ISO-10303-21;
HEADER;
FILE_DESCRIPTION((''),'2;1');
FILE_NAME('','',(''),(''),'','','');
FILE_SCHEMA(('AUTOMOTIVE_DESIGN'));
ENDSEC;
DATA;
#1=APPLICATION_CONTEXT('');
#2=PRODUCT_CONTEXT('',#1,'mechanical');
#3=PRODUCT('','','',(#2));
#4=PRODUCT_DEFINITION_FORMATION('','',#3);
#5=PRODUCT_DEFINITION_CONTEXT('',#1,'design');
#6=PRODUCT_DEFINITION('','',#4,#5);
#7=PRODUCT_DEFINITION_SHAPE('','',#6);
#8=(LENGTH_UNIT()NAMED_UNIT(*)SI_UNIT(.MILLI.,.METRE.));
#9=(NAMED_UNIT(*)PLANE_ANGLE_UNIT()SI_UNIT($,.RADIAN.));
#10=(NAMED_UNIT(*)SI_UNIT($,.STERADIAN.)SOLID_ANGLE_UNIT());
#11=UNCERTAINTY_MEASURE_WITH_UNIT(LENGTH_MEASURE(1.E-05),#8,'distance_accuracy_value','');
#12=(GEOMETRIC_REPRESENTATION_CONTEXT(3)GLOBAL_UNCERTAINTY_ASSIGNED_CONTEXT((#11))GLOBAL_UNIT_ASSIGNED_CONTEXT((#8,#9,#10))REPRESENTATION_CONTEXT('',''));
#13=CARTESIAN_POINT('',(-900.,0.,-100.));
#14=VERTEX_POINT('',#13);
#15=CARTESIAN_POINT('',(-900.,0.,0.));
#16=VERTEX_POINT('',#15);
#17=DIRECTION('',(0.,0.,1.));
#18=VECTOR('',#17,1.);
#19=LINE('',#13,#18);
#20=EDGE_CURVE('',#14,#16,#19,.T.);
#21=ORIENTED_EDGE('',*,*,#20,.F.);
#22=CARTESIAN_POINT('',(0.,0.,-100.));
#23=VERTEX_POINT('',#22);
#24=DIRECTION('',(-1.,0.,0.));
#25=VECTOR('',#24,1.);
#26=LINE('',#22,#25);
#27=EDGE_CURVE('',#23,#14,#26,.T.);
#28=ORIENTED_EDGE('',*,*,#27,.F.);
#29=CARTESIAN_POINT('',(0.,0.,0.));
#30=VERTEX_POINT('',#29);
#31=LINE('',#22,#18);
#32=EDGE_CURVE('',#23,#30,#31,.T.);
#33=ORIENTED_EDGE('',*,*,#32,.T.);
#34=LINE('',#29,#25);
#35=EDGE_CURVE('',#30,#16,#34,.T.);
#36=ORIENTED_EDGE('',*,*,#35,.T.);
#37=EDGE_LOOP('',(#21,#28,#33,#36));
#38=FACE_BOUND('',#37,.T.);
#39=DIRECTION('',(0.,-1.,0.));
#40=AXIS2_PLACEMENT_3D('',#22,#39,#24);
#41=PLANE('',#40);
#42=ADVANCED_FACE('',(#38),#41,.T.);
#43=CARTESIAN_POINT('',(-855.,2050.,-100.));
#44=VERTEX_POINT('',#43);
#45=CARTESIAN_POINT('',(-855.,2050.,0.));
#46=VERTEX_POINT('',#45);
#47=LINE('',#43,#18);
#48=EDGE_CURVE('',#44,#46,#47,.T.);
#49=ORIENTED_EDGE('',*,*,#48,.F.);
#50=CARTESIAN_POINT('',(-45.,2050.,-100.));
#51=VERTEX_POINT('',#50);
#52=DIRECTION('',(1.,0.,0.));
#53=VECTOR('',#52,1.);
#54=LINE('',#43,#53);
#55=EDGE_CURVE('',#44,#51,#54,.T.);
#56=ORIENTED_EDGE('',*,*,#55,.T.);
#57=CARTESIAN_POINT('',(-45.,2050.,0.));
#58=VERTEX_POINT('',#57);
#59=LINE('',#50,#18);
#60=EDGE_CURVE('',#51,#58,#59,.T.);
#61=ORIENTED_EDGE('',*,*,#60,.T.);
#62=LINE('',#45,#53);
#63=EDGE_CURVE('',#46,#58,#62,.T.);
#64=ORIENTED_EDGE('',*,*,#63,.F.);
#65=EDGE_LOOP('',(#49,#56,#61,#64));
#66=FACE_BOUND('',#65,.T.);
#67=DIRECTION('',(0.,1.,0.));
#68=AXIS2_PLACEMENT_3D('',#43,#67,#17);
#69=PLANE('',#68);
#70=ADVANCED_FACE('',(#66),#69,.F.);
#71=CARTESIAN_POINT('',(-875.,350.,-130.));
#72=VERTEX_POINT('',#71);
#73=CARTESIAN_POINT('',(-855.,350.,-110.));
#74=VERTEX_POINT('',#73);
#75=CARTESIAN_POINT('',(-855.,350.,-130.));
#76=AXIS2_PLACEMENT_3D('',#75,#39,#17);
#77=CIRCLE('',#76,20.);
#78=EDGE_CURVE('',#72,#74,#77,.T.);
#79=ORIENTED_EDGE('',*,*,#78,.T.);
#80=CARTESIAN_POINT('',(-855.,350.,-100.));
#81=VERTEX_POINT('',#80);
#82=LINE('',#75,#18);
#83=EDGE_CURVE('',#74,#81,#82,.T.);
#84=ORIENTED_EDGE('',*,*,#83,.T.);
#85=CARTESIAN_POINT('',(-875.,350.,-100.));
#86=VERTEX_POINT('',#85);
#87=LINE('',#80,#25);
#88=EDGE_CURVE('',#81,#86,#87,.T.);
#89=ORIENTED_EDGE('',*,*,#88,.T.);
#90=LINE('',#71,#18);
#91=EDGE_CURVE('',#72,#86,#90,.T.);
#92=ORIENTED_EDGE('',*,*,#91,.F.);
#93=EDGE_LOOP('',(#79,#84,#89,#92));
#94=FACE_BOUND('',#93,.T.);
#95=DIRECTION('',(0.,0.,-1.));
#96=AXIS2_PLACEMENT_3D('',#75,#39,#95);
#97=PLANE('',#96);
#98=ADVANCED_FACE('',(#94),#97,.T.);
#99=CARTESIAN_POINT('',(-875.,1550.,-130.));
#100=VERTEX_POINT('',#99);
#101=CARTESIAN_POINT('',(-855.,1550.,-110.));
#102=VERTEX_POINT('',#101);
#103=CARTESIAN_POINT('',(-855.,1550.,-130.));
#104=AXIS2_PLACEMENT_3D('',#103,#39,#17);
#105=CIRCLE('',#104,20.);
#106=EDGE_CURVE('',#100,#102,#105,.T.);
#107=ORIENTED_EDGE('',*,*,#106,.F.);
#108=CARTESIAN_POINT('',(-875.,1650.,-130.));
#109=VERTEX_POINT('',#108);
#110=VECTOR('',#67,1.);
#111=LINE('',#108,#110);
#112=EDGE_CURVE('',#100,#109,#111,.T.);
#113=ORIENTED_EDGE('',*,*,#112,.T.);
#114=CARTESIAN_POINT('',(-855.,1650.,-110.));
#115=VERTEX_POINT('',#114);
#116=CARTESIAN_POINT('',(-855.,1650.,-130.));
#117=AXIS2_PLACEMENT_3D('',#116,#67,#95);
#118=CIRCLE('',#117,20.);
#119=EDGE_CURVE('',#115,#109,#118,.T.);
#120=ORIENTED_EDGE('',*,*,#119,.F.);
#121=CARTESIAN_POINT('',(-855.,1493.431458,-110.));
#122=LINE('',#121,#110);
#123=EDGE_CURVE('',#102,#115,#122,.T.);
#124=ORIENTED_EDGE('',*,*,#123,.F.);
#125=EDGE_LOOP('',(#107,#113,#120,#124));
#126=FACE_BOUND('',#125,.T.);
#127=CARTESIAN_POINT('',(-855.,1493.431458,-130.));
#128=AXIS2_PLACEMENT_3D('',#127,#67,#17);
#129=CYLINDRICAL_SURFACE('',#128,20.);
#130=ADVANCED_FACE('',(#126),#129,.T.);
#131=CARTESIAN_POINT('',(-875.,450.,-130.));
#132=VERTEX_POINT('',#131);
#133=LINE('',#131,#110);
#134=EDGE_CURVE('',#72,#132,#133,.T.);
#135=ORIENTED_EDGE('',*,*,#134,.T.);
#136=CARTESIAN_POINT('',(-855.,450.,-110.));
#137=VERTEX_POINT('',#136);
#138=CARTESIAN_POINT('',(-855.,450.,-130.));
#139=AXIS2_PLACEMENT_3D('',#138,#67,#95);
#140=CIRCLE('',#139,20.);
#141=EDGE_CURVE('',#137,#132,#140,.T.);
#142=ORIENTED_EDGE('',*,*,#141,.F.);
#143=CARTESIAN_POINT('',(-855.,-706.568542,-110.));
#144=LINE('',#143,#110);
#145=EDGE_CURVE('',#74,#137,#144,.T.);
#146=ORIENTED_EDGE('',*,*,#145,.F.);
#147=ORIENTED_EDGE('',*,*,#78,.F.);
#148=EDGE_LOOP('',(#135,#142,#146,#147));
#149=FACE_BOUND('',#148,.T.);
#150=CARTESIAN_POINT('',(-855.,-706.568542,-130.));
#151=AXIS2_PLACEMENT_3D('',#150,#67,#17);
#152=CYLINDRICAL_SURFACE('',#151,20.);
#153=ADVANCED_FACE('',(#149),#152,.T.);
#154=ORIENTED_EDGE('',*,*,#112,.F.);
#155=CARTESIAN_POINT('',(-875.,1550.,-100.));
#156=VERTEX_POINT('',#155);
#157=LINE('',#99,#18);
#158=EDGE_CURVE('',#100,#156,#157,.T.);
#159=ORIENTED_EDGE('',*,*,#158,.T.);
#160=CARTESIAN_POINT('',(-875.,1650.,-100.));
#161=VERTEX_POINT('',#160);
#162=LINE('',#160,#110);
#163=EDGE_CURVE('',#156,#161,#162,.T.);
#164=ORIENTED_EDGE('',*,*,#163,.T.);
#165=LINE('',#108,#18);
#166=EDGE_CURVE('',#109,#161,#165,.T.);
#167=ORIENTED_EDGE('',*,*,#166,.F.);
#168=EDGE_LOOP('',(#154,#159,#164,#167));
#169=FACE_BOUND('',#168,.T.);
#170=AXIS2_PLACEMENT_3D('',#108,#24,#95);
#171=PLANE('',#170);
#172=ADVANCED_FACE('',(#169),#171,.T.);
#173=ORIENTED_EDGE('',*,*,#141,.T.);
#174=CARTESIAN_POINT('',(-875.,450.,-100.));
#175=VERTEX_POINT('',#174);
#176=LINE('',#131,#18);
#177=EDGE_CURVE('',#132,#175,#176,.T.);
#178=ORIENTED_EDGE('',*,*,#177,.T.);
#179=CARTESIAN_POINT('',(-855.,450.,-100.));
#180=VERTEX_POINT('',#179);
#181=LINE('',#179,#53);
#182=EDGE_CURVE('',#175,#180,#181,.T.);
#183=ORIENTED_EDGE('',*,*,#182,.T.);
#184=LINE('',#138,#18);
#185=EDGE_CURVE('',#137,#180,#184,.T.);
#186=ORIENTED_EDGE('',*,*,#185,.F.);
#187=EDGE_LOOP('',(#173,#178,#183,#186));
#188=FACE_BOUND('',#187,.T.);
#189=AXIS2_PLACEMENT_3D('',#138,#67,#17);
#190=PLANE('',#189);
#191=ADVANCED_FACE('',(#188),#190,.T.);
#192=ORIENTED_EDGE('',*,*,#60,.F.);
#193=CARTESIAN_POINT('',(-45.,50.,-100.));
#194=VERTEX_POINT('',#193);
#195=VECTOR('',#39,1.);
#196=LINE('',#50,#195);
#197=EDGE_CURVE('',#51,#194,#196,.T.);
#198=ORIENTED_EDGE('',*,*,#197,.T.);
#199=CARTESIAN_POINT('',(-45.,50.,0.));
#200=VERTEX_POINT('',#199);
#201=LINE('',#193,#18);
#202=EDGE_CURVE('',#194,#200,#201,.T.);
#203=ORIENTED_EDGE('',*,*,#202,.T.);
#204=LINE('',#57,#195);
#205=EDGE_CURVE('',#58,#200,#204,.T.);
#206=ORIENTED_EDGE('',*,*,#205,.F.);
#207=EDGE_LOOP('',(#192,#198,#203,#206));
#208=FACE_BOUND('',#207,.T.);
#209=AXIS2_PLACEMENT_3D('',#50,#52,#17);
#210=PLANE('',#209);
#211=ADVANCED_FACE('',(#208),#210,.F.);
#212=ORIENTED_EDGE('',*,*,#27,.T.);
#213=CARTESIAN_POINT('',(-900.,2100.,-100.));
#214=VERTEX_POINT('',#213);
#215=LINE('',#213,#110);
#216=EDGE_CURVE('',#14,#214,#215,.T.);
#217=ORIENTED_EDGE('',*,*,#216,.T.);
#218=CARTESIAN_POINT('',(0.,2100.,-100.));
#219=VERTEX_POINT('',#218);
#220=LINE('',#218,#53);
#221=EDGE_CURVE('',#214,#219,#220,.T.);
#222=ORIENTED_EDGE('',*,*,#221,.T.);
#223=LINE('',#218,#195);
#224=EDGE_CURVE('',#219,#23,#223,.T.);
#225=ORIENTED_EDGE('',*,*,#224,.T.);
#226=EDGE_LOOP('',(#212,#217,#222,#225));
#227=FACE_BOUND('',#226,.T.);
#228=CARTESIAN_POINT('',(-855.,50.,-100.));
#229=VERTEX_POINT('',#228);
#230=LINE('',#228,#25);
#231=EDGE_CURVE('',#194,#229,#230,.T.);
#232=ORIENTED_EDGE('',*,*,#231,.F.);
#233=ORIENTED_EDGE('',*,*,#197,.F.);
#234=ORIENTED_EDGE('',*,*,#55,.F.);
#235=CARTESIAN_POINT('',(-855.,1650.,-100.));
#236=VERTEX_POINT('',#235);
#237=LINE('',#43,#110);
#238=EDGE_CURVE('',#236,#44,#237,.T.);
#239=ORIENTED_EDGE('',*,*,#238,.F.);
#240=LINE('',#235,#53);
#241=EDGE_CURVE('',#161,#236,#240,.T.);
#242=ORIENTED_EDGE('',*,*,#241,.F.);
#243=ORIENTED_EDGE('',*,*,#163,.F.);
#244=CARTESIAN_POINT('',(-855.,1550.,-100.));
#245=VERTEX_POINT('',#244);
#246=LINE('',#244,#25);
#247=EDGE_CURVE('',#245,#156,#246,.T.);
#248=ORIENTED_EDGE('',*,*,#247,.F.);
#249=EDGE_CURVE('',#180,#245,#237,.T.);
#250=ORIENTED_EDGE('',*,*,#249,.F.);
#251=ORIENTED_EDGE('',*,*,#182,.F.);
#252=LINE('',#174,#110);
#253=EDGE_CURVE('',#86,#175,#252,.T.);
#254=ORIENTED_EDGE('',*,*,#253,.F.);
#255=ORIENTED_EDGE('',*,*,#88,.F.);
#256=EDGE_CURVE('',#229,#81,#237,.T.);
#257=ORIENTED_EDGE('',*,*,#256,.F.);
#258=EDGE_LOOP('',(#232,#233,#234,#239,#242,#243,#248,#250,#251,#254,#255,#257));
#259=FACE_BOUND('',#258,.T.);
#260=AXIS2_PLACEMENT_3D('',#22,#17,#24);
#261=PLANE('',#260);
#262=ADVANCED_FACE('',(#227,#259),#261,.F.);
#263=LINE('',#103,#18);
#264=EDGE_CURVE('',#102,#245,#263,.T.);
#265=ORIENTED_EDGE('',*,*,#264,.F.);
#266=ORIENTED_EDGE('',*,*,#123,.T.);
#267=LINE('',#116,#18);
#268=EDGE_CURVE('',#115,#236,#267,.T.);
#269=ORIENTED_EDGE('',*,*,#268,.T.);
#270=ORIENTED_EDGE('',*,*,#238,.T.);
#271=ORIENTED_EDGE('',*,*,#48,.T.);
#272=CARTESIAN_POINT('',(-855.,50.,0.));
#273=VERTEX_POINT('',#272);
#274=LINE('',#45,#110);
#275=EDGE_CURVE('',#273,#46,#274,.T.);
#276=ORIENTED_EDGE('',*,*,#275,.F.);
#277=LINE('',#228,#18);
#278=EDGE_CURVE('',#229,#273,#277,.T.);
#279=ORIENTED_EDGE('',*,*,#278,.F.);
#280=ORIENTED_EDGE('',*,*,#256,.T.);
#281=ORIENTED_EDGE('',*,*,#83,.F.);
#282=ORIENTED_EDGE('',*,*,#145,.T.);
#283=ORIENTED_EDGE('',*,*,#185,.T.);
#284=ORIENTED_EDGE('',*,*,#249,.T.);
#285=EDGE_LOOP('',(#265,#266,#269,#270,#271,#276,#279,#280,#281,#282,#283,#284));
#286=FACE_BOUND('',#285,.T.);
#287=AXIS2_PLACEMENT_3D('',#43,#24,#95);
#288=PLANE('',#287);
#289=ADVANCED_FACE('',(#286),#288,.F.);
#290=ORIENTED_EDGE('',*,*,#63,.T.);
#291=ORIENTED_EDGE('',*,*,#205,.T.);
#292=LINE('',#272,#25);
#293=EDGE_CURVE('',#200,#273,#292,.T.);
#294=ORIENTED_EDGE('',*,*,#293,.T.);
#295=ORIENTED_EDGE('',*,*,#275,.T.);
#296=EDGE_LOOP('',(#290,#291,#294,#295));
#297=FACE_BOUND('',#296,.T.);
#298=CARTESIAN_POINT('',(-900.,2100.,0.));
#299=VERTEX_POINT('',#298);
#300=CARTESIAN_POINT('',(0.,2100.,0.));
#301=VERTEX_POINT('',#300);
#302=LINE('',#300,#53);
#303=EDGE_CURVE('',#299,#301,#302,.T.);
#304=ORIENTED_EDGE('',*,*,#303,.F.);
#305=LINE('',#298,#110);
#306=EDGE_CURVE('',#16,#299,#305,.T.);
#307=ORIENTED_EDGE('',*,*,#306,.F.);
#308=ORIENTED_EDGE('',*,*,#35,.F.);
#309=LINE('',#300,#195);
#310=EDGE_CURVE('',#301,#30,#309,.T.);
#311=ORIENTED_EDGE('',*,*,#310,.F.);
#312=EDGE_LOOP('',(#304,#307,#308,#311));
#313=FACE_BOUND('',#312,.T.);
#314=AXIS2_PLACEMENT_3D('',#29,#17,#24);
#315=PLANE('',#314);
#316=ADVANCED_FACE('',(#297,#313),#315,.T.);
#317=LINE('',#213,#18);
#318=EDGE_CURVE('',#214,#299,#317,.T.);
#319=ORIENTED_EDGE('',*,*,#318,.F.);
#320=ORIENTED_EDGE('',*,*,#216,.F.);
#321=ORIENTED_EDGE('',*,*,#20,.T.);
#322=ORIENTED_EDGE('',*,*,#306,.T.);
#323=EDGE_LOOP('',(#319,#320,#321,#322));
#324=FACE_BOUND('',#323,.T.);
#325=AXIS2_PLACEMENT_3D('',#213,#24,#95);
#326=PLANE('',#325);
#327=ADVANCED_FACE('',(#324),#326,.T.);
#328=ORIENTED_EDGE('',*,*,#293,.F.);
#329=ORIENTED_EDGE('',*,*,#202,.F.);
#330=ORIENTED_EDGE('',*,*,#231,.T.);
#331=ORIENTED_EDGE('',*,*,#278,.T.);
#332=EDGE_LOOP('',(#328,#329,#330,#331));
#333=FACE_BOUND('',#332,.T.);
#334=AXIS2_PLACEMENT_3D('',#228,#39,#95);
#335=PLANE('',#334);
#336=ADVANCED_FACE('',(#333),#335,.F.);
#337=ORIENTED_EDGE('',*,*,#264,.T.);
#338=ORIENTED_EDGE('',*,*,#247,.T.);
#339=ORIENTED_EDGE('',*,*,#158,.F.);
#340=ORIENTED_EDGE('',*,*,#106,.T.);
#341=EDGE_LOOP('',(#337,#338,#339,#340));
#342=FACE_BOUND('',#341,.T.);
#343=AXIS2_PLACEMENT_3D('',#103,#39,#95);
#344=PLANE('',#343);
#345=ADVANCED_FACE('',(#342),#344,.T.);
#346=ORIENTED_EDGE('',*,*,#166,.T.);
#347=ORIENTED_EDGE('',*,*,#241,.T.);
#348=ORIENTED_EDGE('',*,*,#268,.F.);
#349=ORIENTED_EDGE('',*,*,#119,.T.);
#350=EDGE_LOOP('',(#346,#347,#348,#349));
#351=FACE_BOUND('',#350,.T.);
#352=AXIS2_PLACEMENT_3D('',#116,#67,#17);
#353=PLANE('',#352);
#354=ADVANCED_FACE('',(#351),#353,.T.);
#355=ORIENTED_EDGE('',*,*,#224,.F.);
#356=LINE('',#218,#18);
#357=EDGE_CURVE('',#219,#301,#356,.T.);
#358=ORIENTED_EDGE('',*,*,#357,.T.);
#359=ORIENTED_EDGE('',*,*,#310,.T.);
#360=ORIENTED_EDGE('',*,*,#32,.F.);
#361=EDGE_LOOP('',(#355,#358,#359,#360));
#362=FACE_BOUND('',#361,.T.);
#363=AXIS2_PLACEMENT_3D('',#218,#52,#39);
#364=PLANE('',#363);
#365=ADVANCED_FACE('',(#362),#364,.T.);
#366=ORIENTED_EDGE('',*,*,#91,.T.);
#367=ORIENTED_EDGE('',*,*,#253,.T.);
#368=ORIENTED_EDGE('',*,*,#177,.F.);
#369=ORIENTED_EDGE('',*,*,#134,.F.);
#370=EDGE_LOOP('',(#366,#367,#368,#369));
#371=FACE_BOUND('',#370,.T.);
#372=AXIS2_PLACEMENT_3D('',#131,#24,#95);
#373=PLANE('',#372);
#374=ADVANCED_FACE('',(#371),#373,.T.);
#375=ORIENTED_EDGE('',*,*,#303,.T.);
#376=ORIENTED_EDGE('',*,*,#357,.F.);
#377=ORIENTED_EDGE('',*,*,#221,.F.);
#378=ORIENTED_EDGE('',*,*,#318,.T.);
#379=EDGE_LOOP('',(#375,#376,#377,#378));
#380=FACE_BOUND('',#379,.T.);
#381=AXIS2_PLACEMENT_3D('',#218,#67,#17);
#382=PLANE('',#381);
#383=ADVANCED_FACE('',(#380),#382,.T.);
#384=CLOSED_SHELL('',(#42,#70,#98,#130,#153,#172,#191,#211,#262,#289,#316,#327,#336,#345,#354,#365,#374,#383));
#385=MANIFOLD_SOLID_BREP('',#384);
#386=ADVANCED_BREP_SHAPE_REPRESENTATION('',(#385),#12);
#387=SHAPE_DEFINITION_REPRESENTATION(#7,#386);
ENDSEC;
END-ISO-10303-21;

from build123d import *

# Parameters (mm, degrees)
SKETCH_1_W               = 900
SKETCH_1_H               = 2100
SKETCH_1_W_2             = 810
SKETCH_1_H_2             = 2000
EXTRUDE_1_DEPTH          = 100
SKETCH_2_W               = 20
SKETCH_2_H               = 100
EXTRUDE_2_DEPTH          = 30
SKETCH_3_R               = 20
EXTRUDE_3_DEPTH          = 100
PATTERN_LINEAR_1_COUNT   = 2
PATTERN_LINEAR_1_PITCH   = 1200
MIRROR_1_COPY_1_SKETCH_W = 20
MIRROR_1_COPY_1_SKETCH_H = 100
MIRROR_1_COPY_1_DEPTH    = 30
MIRROR_1_COPY_2_SKETCH_R = 20
MIRROR_1_COPY_2_DEPTH    = 100
DELETE_FACE_1_OUTLINE_W  = 41
DELETE_FACE_1_OUTLINE_H  = 100
DELETE_FACE_1_DEPTH      = 50


# Read off the part's stored shape, not the designer's step: Удалить грань1
with BuildPart() as part:
    # Эскиз1 → Бобышка-Вытянуть1 (new body)
    with BuildSketch(Plane.XY):
        with Locations((450, 1050)):
            Rectangle(SKETCH_1_W, SKETCH_1_H)
        with Locations((450, 1050)):
            Rectangle(SKETCH_1_W_2, SKETCH_1_H_2, mode=Mode.SUBTRACT)
    extrude(amount=-EXTRUDE_1_DEPTH)

    # Эскиз2 → Бобышка-Вытянуть2 (add)
    with BuildSketch(Plane.XY):
        with Locations((865, 1600)):
            Rectangle(SKETCH_2_W, SKETCH_2_H)
    extrude_2 = extrude(amount=EXTRUDE_2_DEPTH)

    # Эскиз3 → Бобышка-Вытянуть3 (add)
    with BuildSketch(Plane(origin=(0, 1650, 0), x_dir=(1, 0, 0), z_dir=(0, 1, 0))):
        with Locations((855, -30)):
            Circle(SKETCH_3_R)
    extrude_3 = extrude(amount=-EXTRUDE_3_DEPTH)

    # Линейный массив1: Бобышка-Вытянуть2, Бобышка-Вытянуть3 ×2
    with Locations(*[(0, -i * PATTERN_LINEAR_1_PITCH, 0) for i in range(1, PATTERN_LINEAR_1_COUNT)]):
        add(extrude_2)
        add(extrude_3)

    # Зеркальное отражение1: Бобышка-Вытянуть2, Бобышка-Вытянуть3 across plane
    add(extrude_2.mirror(Plane.XY.offset(-50)))
    add(extrude_3.mirror(Plane.XY.offset(-50)))

    # Зеркальное отражение1 copy 1 sketch → Зеркальное отражение1 copy 1 (add)
    with BuildSketch(Plane(origin=(0, -1200, -100), x_dir=(1, 0, 0), z_dir=(0, 0, -1))):
        with Locations((865, -1600)):
            Rectangle(MIRROR_1_COPY_1_SKETCH_W, MIRROR_1_COPY_1_SKETCH_H)
    extrude(amount=MIRROR_1_COPY_1_DEPTH)

    # Зеркальное отражение1 copy 2 sketch → Зеркальное отражение1 copy 2 (add)
    with BuildSketch(Plane(origin=(0, 450, -100), x_dir=(1, 0, 0), z_dir=(0, 1, 0))):
        with Locations((855, 30)):
            Circle(MIRROR_1_COPY_2_SKETCH_R)
    extrude(amount=-MIRROR_1_COPY_2_DEPTH)

    # Delete Face 1 outline → Delete Face 1 (cut)
    with BuildSketch(Plane.XY):
        with Locations((854.5, 1600)):
            Rectangle(DELETE_FACE_1_OUTLINE_W, DELETE_FACE_1_OUTLINE_H)
        with Locations((854.5, 400)):
            Rectangle(DELETE_FACE_1_OUTLINE_W, DELETE_FACE_1_OUTLINE_H)
    extrude(amount=DELETE_FACE_1_DEPTH, mode=Mode.SUBTRACT)


with BuildPart() as body_2:
    # Зеркальное отражение2: mirrored copy
    add(part.part.mirror(Plane(origin=(0, 0, 0), x_dir=(0, 0, 1), z_dir=(1, 0, 0))))


solid = body_2.part
